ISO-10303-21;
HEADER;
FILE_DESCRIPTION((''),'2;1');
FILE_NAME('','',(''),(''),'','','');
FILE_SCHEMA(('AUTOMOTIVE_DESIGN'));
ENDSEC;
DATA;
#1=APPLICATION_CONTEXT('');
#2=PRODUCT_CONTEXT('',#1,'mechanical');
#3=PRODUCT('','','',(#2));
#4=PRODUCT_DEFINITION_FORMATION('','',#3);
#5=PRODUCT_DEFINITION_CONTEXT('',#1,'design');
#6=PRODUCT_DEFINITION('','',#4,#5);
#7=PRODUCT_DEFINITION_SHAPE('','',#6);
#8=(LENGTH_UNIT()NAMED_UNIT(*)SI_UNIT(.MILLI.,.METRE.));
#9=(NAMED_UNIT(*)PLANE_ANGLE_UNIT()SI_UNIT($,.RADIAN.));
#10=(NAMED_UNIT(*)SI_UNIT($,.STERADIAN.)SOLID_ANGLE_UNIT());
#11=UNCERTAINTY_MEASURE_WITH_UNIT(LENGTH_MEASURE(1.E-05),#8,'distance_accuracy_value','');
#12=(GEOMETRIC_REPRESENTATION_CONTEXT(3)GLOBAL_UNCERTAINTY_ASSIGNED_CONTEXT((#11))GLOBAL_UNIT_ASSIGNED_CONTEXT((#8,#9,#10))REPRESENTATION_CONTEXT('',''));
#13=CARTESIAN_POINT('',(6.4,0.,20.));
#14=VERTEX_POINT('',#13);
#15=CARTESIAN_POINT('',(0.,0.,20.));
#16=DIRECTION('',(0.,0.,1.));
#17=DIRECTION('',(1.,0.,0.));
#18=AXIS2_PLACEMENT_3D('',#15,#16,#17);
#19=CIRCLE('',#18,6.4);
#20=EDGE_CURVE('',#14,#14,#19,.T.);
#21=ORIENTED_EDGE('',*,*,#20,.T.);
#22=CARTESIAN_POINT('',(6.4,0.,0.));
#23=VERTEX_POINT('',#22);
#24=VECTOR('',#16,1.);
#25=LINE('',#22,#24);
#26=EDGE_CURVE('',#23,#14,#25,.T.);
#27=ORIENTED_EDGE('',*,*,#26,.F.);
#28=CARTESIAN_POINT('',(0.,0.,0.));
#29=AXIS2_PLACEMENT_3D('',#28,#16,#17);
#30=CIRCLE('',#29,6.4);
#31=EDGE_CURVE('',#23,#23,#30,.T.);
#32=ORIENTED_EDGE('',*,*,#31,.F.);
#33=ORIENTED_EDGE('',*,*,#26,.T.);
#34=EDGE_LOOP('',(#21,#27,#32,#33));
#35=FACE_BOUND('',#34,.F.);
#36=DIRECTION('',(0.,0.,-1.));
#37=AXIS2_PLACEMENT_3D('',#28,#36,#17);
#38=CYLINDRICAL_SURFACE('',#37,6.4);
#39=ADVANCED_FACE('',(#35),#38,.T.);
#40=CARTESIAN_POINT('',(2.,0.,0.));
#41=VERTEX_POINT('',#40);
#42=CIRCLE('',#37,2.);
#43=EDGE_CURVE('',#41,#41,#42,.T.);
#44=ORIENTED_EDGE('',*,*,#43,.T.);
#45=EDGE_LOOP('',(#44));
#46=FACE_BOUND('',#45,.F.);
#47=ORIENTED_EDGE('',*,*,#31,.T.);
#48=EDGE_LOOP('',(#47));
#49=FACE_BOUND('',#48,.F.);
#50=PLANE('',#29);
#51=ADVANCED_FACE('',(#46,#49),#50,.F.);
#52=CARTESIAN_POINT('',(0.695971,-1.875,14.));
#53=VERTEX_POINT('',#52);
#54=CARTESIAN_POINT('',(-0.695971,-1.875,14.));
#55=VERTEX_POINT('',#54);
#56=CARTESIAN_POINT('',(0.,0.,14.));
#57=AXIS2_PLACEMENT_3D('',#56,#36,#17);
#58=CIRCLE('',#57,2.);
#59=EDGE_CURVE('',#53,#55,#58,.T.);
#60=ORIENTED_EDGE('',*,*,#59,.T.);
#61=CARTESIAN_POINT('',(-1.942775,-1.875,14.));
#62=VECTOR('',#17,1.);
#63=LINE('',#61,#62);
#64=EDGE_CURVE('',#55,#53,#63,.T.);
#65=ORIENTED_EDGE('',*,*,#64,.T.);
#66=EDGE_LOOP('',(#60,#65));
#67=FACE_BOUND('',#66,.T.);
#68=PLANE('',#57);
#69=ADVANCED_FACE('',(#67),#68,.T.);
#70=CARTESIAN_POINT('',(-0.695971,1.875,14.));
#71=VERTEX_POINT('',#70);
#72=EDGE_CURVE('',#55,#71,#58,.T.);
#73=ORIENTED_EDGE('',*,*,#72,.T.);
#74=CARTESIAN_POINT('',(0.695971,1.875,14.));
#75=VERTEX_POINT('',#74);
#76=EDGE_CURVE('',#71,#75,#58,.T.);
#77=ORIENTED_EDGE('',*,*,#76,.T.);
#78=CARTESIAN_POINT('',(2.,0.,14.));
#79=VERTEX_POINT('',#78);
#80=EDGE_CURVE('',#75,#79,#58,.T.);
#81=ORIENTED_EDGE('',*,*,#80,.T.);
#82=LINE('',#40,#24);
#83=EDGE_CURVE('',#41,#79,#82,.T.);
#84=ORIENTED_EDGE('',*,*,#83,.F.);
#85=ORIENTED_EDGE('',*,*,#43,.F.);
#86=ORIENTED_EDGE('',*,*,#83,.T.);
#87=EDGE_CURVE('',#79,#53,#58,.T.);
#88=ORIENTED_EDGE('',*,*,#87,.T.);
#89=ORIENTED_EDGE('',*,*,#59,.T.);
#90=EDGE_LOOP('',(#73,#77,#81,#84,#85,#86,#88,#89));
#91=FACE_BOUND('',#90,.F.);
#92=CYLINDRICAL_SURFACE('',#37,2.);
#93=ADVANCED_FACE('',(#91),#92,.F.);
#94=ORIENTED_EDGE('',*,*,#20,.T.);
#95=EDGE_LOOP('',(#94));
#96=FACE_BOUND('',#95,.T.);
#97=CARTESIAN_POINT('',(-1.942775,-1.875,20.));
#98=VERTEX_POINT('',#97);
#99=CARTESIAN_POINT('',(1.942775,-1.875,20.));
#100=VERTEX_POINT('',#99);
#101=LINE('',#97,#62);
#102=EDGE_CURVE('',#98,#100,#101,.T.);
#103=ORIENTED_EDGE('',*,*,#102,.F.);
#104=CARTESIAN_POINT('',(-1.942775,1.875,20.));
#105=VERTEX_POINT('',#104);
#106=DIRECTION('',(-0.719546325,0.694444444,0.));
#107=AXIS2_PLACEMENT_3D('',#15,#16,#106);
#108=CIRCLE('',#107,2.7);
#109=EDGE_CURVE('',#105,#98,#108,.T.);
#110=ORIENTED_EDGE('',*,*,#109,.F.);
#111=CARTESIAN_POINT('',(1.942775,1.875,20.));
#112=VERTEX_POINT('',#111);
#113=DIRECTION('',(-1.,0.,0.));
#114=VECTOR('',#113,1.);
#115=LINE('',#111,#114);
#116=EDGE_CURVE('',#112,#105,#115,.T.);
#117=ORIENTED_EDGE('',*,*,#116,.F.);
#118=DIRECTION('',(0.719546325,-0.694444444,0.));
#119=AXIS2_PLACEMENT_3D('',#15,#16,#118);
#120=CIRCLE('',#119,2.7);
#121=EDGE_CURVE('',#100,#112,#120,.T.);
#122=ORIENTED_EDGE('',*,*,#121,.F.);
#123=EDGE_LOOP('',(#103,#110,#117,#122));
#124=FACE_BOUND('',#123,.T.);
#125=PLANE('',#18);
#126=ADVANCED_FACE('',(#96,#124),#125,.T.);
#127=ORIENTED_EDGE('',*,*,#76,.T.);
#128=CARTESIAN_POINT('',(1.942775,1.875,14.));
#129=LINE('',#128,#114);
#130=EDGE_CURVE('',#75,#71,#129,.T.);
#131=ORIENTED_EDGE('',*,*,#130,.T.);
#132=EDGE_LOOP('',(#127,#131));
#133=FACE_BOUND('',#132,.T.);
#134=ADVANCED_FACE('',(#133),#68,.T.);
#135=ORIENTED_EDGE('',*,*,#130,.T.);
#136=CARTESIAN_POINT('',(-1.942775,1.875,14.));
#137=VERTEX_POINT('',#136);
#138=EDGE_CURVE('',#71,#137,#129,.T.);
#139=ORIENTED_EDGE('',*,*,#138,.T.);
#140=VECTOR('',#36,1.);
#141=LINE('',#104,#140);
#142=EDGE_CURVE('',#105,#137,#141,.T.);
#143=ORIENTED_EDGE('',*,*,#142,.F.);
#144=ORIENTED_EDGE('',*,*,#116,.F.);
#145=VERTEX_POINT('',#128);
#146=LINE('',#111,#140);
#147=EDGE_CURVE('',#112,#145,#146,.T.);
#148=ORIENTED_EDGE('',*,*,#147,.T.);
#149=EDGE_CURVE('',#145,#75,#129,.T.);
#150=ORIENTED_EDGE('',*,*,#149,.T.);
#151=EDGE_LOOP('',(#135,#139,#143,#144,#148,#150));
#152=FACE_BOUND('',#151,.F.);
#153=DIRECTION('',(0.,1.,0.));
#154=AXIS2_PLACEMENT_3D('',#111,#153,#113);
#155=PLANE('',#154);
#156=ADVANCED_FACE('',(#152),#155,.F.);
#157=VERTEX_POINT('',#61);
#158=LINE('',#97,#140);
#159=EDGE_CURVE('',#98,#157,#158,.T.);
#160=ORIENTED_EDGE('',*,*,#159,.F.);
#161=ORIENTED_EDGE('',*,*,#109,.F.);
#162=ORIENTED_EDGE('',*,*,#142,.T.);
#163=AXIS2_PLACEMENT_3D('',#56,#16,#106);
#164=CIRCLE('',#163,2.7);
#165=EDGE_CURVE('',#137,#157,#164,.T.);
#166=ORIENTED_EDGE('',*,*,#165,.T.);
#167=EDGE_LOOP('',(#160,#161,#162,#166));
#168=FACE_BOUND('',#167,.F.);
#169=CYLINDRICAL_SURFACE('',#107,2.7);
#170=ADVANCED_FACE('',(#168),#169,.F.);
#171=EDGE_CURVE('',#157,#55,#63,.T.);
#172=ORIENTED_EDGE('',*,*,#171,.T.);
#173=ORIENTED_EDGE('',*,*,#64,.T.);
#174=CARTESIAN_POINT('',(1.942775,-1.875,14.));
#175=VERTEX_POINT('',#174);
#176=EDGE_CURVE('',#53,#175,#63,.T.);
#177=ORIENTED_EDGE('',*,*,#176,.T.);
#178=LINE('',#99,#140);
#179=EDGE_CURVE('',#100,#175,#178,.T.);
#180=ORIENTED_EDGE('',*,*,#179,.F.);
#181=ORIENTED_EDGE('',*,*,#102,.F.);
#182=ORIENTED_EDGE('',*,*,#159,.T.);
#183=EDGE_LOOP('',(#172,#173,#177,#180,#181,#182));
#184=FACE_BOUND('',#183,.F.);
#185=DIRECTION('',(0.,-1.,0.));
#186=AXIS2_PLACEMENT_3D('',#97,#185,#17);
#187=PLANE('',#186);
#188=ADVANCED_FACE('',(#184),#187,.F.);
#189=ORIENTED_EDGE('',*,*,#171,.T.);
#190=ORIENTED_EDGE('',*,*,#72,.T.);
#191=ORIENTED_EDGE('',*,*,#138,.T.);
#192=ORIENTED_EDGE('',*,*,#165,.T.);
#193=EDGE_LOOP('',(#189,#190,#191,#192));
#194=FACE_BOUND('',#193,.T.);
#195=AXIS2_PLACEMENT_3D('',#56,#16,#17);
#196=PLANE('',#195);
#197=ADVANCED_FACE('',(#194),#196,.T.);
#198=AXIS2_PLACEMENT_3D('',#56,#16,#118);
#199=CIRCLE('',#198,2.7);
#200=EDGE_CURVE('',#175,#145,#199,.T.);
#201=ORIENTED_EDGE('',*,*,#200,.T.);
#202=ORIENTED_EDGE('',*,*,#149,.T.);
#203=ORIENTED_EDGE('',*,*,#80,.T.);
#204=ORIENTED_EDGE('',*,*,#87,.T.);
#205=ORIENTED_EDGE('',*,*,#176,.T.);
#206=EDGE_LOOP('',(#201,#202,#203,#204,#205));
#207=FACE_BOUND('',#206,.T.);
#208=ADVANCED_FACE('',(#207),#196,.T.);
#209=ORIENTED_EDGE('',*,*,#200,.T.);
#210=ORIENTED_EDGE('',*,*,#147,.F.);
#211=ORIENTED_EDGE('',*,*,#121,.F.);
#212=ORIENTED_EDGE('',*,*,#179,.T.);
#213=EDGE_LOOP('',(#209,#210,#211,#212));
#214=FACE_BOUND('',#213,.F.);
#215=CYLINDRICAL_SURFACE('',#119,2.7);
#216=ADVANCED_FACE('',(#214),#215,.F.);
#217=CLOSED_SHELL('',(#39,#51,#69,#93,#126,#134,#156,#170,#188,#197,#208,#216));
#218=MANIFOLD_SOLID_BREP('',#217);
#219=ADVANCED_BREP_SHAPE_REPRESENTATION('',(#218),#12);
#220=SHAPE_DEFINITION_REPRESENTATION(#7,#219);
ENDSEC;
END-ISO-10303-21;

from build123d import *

# Parameters (mm, degrees)
F0_R     = 6.4
F1_DEPTH = 20
F3_DEPTH = 6
F4_R     = 2
F5_DEPTH = 14


# Not quite as in the source:
# - a feature names something its author has since deleted; it is built from what else it names


with BuildPart() as f1:
    # F0 (on Top) → F1 (new body)
    with BuildSketch(Plane.XY):
        Circle(F0_R)
    extrude(amount=F1_DEPTH)

    # F2 (on face) → F3 (cut)
    with BuildSketch(Plane.XY.offset(20)):
        with BuildLine():
            Line((1.942775077, 1.875), (-1.942775077, 1.875))
            ThreePointArc((-1.942775077, 1.875), (-2.7, 0), (-1.942775077, -1.875))
            Line((-1.942775077, -1.875), (1.942775077, -1.875))
            ThreePointArc((1.942775077, -1.875), (2.7, 0), (1.942775077, 1.875))
        make_face()
    extrude(amount=-F3_DEPTH, mode=Mode.SUBTRACT)

    # F4 (on face) → F5 (cut, through all)
    with BuildSketch(Plane(origin=(0, 0, 0), x_dir=(1, 0, 0), z_dir=(0, 0, -1))):
        Circle(F4_R)
    extrude(amount=-F5_DEPTH, mode=Mode.SUBTRACT)


solid = f1.part
